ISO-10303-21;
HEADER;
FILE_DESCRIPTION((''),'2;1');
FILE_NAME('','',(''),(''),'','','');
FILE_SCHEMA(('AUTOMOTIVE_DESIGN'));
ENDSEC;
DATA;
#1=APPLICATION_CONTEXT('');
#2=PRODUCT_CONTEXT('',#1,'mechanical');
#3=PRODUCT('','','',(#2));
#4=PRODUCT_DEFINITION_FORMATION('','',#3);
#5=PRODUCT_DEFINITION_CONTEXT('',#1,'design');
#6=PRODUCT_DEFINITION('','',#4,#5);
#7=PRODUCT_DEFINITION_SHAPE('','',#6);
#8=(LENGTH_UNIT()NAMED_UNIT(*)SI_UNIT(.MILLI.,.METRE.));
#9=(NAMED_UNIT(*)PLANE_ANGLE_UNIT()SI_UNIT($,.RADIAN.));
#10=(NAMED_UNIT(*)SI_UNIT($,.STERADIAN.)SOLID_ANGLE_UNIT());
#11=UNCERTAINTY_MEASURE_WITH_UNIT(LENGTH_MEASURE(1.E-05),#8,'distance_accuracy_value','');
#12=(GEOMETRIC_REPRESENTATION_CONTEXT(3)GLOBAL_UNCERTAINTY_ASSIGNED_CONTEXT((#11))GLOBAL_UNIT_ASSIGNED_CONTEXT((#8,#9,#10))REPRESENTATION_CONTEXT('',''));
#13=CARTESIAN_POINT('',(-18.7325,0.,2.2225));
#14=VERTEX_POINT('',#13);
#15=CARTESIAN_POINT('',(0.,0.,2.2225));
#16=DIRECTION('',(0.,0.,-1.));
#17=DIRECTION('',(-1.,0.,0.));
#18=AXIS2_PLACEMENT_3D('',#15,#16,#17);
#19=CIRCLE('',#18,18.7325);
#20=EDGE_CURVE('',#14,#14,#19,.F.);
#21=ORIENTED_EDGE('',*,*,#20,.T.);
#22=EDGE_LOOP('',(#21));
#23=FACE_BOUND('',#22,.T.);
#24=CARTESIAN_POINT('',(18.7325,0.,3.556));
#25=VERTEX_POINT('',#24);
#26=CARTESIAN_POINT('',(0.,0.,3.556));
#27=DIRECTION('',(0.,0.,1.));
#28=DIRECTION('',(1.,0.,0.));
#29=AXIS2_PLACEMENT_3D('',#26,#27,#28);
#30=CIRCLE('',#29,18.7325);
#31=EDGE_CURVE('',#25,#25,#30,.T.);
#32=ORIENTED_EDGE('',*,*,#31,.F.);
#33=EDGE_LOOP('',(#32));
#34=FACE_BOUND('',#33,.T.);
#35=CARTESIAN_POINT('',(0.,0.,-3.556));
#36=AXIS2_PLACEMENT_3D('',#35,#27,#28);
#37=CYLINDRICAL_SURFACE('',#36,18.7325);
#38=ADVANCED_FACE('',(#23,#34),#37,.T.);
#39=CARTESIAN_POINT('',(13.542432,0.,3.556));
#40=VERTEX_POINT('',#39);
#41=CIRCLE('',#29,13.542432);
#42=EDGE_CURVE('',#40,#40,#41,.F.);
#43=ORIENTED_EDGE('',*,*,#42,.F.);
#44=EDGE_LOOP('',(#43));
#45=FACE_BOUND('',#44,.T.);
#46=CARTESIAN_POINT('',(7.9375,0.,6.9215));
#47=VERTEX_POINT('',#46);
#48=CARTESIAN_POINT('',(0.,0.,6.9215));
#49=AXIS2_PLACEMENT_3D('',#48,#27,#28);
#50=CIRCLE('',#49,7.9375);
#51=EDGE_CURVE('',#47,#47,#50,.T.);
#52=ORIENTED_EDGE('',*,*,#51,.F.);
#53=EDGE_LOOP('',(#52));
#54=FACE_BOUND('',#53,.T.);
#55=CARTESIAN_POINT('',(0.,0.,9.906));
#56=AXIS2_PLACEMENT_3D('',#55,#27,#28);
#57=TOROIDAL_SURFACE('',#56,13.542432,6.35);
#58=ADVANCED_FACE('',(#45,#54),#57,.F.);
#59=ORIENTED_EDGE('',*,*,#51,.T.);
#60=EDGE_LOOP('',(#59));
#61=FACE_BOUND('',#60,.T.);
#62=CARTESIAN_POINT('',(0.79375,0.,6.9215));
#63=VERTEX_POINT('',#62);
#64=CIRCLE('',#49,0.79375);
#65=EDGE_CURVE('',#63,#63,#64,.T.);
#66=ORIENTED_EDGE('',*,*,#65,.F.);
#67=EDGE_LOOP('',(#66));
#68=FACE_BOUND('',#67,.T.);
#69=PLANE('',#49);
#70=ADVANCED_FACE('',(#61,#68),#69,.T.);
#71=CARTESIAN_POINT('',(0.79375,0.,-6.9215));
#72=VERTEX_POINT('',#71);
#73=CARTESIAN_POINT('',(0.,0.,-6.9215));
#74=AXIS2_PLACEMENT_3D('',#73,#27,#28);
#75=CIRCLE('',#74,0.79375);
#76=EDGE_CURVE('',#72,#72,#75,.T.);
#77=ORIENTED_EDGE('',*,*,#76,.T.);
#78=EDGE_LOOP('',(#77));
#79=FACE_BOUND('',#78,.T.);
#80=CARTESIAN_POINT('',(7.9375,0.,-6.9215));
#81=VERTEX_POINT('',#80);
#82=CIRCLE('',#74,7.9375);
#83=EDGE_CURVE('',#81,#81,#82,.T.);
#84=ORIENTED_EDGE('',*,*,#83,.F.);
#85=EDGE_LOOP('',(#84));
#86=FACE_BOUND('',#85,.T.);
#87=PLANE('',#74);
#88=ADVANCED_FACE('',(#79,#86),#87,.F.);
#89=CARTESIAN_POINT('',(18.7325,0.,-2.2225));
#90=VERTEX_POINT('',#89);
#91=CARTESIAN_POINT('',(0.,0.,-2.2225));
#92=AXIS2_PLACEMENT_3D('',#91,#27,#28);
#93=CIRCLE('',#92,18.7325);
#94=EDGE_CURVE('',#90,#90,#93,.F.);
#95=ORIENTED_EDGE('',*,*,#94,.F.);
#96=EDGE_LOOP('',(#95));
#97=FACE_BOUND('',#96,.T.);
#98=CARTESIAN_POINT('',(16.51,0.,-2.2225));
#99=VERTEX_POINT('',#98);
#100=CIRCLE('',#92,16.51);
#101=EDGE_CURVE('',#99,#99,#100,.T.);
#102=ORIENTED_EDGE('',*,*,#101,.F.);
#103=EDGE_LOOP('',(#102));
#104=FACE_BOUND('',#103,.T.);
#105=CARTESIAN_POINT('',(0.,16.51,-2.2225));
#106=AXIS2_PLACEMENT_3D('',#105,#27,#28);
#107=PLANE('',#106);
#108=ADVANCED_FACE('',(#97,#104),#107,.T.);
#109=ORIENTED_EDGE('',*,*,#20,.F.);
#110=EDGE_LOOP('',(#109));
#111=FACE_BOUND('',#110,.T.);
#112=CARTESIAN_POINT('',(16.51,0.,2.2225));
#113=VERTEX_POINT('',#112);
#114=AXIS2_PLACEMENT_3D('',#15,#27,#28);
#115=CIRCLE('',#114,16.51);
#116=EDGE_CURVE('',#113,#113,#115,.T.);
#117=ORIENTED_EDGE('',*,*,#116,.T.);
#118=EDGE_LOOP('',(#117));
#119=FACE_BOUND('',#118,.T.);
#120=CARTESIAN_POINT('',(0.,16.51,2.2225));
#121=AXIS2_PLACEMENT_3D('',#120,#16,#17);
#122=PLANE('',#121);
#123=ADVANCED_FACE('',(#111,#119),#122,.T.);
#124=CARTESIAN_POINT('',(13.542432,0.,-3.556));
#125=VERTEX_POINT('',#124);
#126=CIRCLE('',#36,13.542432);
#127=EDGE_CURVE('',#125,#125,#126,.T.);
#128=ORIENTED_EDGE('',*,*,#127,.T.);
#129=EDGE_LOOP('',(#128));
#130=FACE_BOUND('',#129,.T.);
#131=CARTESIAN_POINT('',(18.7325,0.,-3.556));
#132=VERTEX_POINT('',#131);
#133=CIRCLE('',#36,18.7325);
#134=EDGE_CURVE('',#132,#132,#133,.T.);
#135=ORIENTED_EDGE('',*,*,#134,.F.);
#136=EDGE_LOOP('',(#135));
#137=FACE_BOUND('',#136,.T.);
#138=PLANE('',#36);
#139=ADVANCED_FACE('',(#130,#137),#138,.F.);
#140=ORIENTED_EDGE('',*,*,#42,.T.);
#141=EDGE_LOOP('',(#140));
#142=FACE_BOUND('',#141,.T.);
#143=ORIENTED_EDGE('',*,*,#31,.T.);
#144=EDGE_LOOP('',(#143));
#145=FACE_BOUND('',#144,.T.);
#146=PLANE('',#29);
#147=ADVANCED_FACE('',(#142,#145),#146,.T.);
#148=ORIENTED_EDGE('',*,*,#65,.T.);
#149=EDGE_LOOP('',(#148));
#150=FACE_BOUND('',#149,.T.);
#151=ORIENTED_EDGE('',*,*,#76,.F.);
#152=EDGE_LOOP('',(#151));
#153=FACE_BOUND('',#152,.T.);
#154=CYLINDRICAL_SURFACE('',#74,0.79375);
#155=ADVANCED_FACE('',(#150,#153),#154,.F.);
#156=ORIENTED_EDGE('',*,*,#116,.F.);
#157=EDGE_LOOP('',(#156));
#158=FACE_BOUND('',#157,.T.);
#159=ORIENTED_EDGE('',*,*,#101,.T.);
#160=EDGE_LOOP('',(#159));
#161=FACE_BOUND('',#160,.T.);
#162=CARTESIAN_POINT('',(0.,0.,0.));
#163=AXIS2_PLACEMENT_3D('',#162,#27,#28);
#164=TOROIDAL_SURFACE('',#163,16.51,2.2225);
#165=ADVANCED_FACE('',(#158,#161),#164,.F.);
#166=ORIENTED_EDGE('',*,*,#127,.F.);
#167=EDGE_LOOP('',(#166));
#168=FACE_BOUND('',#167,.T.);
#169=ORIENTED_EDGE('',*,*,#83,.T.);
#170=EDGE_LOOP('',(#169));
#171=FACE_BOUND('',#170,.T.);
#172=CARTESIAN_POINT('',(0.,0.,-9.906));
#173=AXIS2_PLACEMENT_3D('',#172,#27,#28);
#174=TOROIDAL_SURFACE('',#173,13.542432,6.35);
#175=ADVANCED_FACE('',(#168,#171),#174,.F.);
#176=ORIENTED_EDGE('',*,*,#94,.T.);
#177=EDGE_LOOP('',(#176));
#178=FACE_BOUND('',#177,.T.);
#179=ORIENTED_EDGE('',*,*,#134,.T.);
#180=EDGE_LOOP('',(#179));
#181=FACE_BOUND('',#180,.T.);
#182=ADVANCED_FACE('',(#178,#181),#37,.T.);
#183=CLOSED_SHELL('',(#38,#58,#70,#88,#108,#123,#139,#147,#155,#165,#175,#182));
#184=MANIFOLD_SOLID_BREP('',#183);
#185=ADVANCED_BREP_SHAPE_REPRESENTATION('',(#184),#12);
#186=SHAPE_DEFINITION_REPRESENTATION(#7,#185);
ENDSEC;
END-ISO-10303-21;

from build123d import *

# Parameters (mm, degrees)
BOSS_EXTRUDE1_DEPTH      = 3.556
BOSS_EXTRUDE1_DEPTH_BACK = 3.556
SKETCH2_R                = 18.7325
BOSS_EXTRUDE2_DEPTH      = 6.9215
BOSS_EXTRUDE2_DEPTH_BACK = 6.9215
SKETCH4_R                = 7.9375
FILLET1_R                = 6.35
CUT_EXTRUDE1_DEPTH       = 30.890496174
CUT_EXTRUDE1_DEPTH_BACK  = 30.890496174
SKETCH5_R                = 0.79375


with BuildPart() as part:
    # Sketch2 → Boss-Extrude1 (new, two sides: drawn at the far end of the back side and taken through both)
    with BuildSketch(Plane.XY.offset(-BOSS_EXTRUDE1_DEPTH_BACK)):
        Circle(SKETCH2_R)
    extrude(amount=BOSS_EXTRUDE1_DEPTH + BOSS_EXTRUDE1_DEPTH_BACK)

    # Sketch3 → Cut-Revolve1 (revolve, cut)
    with BuildSketch(Plane(origin=(0, 0, 0), x_dir=(0, 0, -1), z_dir=(1, 0, 0)), mode=Mode.PRIVATE) as cut_revolve1_sk:
        with BuildLine():
            Line((-2.2225, 16.51), (-2.2225, 20.955))
            Line((-2.2225, 20.955), (2.2225, 20.955))
            Line((2.2225, 20.955), (2.2225, 16.51))
            ThreePointArc((2.2225, 16.51), (0, 14.2875), (-2.2225, 16.51))
        make_face()
    revolve(cut_revolve1_sk.sketch.rotate(Axis((0, 0, 3.556), (0, 0, -1)), 90), axis=Axis((0, 0, 3.556), (0, 0, -1)), mode=Mode.SUBTRACT)

    # Sketch4 → Boss-Extrude2 (add, two sides: drawn at the far end of the back side and taken through both)
    with BuildSketch(Plane.XY.offset(-BOSS_EXTRUDE2_DEPTH_BACK)):
        Circle(SKETCH4_R)
    extrude(amount=BOSS_EXTRUDE2_DEPTH + BOSS_EXTRUDE2_DEPTH_BACK)

    # Fillet1
    # the kernel refuses this fillet: 6.35 mm, written as the material it adds along each edge
    with BuildSketch(Plane(origin=(0, 0, 3.556), x_dir=(1, 0, 0), z_dir=(0, 1, 0))) as fillet1_piece_1:
        with BuildLine():
            CenterArc((13.542431735, -6.35), FILLET1_R, 90, 61.965703465)
            Line((7.9375, -3.3655), (7.825401365, -3.30581))
            ThreePointArc((7.825401365, -3.30581), (7.8105, -1.68275), (7.8105, 0))
            Line((7.8105, 0), (7.9375, 0.127))
            Line((7.9375, 0.127), (13.542431735, 0.127))
            Line((13.542431735, 0.127), (13.542431735, 0))
        make_face()
    revolve(axis=Axis((0, 0, 3.556), (0, 0, -1)))
    with BuildSketch(Plane(origin=(0, 0, -3.556), x_dir=(1, 0, 0), z_dir=(0, -1, 0))) as fillet1_piece_2:
        with BuildLine():
            CenterArc((13.542431735, -6.35), FILLET1_R, 90, 61.965703465)
            Line((7.9375, -3.3655), (7.825401365, -3.30581))
            ThreePointArc((7.825401365, -3.30581), (7.8105, -1.68275), (7.8105, 0))
            Line((7.8105, 0), (7.9375, 0.127))
            Line((7.9375, 0.127), (13.542431735, 0.127))
            Line((13.542431735, 0.127), (13.542431735, 0))
        make_face()
    revolve(axis=Axis((0, 0, -3.556), (0, 0, 1)))

    # Sketch5 → Cut-Extrude1 (cut, two sides: drawn at the far end of the back side and taken through both)
    with BuildSketch(Plane.XY.offset(6.9215).offset(-CUT_EXTRUDE1_DEPTH_BACK)):
        Circle(SKETCH5_R)
    extrude(amount=CUT_EXTRUDE1_DEPTH + CUT_EXTRUDE1_DEPTH_BACK, mode=Mode.SUBTRACT)


solid = part.part
